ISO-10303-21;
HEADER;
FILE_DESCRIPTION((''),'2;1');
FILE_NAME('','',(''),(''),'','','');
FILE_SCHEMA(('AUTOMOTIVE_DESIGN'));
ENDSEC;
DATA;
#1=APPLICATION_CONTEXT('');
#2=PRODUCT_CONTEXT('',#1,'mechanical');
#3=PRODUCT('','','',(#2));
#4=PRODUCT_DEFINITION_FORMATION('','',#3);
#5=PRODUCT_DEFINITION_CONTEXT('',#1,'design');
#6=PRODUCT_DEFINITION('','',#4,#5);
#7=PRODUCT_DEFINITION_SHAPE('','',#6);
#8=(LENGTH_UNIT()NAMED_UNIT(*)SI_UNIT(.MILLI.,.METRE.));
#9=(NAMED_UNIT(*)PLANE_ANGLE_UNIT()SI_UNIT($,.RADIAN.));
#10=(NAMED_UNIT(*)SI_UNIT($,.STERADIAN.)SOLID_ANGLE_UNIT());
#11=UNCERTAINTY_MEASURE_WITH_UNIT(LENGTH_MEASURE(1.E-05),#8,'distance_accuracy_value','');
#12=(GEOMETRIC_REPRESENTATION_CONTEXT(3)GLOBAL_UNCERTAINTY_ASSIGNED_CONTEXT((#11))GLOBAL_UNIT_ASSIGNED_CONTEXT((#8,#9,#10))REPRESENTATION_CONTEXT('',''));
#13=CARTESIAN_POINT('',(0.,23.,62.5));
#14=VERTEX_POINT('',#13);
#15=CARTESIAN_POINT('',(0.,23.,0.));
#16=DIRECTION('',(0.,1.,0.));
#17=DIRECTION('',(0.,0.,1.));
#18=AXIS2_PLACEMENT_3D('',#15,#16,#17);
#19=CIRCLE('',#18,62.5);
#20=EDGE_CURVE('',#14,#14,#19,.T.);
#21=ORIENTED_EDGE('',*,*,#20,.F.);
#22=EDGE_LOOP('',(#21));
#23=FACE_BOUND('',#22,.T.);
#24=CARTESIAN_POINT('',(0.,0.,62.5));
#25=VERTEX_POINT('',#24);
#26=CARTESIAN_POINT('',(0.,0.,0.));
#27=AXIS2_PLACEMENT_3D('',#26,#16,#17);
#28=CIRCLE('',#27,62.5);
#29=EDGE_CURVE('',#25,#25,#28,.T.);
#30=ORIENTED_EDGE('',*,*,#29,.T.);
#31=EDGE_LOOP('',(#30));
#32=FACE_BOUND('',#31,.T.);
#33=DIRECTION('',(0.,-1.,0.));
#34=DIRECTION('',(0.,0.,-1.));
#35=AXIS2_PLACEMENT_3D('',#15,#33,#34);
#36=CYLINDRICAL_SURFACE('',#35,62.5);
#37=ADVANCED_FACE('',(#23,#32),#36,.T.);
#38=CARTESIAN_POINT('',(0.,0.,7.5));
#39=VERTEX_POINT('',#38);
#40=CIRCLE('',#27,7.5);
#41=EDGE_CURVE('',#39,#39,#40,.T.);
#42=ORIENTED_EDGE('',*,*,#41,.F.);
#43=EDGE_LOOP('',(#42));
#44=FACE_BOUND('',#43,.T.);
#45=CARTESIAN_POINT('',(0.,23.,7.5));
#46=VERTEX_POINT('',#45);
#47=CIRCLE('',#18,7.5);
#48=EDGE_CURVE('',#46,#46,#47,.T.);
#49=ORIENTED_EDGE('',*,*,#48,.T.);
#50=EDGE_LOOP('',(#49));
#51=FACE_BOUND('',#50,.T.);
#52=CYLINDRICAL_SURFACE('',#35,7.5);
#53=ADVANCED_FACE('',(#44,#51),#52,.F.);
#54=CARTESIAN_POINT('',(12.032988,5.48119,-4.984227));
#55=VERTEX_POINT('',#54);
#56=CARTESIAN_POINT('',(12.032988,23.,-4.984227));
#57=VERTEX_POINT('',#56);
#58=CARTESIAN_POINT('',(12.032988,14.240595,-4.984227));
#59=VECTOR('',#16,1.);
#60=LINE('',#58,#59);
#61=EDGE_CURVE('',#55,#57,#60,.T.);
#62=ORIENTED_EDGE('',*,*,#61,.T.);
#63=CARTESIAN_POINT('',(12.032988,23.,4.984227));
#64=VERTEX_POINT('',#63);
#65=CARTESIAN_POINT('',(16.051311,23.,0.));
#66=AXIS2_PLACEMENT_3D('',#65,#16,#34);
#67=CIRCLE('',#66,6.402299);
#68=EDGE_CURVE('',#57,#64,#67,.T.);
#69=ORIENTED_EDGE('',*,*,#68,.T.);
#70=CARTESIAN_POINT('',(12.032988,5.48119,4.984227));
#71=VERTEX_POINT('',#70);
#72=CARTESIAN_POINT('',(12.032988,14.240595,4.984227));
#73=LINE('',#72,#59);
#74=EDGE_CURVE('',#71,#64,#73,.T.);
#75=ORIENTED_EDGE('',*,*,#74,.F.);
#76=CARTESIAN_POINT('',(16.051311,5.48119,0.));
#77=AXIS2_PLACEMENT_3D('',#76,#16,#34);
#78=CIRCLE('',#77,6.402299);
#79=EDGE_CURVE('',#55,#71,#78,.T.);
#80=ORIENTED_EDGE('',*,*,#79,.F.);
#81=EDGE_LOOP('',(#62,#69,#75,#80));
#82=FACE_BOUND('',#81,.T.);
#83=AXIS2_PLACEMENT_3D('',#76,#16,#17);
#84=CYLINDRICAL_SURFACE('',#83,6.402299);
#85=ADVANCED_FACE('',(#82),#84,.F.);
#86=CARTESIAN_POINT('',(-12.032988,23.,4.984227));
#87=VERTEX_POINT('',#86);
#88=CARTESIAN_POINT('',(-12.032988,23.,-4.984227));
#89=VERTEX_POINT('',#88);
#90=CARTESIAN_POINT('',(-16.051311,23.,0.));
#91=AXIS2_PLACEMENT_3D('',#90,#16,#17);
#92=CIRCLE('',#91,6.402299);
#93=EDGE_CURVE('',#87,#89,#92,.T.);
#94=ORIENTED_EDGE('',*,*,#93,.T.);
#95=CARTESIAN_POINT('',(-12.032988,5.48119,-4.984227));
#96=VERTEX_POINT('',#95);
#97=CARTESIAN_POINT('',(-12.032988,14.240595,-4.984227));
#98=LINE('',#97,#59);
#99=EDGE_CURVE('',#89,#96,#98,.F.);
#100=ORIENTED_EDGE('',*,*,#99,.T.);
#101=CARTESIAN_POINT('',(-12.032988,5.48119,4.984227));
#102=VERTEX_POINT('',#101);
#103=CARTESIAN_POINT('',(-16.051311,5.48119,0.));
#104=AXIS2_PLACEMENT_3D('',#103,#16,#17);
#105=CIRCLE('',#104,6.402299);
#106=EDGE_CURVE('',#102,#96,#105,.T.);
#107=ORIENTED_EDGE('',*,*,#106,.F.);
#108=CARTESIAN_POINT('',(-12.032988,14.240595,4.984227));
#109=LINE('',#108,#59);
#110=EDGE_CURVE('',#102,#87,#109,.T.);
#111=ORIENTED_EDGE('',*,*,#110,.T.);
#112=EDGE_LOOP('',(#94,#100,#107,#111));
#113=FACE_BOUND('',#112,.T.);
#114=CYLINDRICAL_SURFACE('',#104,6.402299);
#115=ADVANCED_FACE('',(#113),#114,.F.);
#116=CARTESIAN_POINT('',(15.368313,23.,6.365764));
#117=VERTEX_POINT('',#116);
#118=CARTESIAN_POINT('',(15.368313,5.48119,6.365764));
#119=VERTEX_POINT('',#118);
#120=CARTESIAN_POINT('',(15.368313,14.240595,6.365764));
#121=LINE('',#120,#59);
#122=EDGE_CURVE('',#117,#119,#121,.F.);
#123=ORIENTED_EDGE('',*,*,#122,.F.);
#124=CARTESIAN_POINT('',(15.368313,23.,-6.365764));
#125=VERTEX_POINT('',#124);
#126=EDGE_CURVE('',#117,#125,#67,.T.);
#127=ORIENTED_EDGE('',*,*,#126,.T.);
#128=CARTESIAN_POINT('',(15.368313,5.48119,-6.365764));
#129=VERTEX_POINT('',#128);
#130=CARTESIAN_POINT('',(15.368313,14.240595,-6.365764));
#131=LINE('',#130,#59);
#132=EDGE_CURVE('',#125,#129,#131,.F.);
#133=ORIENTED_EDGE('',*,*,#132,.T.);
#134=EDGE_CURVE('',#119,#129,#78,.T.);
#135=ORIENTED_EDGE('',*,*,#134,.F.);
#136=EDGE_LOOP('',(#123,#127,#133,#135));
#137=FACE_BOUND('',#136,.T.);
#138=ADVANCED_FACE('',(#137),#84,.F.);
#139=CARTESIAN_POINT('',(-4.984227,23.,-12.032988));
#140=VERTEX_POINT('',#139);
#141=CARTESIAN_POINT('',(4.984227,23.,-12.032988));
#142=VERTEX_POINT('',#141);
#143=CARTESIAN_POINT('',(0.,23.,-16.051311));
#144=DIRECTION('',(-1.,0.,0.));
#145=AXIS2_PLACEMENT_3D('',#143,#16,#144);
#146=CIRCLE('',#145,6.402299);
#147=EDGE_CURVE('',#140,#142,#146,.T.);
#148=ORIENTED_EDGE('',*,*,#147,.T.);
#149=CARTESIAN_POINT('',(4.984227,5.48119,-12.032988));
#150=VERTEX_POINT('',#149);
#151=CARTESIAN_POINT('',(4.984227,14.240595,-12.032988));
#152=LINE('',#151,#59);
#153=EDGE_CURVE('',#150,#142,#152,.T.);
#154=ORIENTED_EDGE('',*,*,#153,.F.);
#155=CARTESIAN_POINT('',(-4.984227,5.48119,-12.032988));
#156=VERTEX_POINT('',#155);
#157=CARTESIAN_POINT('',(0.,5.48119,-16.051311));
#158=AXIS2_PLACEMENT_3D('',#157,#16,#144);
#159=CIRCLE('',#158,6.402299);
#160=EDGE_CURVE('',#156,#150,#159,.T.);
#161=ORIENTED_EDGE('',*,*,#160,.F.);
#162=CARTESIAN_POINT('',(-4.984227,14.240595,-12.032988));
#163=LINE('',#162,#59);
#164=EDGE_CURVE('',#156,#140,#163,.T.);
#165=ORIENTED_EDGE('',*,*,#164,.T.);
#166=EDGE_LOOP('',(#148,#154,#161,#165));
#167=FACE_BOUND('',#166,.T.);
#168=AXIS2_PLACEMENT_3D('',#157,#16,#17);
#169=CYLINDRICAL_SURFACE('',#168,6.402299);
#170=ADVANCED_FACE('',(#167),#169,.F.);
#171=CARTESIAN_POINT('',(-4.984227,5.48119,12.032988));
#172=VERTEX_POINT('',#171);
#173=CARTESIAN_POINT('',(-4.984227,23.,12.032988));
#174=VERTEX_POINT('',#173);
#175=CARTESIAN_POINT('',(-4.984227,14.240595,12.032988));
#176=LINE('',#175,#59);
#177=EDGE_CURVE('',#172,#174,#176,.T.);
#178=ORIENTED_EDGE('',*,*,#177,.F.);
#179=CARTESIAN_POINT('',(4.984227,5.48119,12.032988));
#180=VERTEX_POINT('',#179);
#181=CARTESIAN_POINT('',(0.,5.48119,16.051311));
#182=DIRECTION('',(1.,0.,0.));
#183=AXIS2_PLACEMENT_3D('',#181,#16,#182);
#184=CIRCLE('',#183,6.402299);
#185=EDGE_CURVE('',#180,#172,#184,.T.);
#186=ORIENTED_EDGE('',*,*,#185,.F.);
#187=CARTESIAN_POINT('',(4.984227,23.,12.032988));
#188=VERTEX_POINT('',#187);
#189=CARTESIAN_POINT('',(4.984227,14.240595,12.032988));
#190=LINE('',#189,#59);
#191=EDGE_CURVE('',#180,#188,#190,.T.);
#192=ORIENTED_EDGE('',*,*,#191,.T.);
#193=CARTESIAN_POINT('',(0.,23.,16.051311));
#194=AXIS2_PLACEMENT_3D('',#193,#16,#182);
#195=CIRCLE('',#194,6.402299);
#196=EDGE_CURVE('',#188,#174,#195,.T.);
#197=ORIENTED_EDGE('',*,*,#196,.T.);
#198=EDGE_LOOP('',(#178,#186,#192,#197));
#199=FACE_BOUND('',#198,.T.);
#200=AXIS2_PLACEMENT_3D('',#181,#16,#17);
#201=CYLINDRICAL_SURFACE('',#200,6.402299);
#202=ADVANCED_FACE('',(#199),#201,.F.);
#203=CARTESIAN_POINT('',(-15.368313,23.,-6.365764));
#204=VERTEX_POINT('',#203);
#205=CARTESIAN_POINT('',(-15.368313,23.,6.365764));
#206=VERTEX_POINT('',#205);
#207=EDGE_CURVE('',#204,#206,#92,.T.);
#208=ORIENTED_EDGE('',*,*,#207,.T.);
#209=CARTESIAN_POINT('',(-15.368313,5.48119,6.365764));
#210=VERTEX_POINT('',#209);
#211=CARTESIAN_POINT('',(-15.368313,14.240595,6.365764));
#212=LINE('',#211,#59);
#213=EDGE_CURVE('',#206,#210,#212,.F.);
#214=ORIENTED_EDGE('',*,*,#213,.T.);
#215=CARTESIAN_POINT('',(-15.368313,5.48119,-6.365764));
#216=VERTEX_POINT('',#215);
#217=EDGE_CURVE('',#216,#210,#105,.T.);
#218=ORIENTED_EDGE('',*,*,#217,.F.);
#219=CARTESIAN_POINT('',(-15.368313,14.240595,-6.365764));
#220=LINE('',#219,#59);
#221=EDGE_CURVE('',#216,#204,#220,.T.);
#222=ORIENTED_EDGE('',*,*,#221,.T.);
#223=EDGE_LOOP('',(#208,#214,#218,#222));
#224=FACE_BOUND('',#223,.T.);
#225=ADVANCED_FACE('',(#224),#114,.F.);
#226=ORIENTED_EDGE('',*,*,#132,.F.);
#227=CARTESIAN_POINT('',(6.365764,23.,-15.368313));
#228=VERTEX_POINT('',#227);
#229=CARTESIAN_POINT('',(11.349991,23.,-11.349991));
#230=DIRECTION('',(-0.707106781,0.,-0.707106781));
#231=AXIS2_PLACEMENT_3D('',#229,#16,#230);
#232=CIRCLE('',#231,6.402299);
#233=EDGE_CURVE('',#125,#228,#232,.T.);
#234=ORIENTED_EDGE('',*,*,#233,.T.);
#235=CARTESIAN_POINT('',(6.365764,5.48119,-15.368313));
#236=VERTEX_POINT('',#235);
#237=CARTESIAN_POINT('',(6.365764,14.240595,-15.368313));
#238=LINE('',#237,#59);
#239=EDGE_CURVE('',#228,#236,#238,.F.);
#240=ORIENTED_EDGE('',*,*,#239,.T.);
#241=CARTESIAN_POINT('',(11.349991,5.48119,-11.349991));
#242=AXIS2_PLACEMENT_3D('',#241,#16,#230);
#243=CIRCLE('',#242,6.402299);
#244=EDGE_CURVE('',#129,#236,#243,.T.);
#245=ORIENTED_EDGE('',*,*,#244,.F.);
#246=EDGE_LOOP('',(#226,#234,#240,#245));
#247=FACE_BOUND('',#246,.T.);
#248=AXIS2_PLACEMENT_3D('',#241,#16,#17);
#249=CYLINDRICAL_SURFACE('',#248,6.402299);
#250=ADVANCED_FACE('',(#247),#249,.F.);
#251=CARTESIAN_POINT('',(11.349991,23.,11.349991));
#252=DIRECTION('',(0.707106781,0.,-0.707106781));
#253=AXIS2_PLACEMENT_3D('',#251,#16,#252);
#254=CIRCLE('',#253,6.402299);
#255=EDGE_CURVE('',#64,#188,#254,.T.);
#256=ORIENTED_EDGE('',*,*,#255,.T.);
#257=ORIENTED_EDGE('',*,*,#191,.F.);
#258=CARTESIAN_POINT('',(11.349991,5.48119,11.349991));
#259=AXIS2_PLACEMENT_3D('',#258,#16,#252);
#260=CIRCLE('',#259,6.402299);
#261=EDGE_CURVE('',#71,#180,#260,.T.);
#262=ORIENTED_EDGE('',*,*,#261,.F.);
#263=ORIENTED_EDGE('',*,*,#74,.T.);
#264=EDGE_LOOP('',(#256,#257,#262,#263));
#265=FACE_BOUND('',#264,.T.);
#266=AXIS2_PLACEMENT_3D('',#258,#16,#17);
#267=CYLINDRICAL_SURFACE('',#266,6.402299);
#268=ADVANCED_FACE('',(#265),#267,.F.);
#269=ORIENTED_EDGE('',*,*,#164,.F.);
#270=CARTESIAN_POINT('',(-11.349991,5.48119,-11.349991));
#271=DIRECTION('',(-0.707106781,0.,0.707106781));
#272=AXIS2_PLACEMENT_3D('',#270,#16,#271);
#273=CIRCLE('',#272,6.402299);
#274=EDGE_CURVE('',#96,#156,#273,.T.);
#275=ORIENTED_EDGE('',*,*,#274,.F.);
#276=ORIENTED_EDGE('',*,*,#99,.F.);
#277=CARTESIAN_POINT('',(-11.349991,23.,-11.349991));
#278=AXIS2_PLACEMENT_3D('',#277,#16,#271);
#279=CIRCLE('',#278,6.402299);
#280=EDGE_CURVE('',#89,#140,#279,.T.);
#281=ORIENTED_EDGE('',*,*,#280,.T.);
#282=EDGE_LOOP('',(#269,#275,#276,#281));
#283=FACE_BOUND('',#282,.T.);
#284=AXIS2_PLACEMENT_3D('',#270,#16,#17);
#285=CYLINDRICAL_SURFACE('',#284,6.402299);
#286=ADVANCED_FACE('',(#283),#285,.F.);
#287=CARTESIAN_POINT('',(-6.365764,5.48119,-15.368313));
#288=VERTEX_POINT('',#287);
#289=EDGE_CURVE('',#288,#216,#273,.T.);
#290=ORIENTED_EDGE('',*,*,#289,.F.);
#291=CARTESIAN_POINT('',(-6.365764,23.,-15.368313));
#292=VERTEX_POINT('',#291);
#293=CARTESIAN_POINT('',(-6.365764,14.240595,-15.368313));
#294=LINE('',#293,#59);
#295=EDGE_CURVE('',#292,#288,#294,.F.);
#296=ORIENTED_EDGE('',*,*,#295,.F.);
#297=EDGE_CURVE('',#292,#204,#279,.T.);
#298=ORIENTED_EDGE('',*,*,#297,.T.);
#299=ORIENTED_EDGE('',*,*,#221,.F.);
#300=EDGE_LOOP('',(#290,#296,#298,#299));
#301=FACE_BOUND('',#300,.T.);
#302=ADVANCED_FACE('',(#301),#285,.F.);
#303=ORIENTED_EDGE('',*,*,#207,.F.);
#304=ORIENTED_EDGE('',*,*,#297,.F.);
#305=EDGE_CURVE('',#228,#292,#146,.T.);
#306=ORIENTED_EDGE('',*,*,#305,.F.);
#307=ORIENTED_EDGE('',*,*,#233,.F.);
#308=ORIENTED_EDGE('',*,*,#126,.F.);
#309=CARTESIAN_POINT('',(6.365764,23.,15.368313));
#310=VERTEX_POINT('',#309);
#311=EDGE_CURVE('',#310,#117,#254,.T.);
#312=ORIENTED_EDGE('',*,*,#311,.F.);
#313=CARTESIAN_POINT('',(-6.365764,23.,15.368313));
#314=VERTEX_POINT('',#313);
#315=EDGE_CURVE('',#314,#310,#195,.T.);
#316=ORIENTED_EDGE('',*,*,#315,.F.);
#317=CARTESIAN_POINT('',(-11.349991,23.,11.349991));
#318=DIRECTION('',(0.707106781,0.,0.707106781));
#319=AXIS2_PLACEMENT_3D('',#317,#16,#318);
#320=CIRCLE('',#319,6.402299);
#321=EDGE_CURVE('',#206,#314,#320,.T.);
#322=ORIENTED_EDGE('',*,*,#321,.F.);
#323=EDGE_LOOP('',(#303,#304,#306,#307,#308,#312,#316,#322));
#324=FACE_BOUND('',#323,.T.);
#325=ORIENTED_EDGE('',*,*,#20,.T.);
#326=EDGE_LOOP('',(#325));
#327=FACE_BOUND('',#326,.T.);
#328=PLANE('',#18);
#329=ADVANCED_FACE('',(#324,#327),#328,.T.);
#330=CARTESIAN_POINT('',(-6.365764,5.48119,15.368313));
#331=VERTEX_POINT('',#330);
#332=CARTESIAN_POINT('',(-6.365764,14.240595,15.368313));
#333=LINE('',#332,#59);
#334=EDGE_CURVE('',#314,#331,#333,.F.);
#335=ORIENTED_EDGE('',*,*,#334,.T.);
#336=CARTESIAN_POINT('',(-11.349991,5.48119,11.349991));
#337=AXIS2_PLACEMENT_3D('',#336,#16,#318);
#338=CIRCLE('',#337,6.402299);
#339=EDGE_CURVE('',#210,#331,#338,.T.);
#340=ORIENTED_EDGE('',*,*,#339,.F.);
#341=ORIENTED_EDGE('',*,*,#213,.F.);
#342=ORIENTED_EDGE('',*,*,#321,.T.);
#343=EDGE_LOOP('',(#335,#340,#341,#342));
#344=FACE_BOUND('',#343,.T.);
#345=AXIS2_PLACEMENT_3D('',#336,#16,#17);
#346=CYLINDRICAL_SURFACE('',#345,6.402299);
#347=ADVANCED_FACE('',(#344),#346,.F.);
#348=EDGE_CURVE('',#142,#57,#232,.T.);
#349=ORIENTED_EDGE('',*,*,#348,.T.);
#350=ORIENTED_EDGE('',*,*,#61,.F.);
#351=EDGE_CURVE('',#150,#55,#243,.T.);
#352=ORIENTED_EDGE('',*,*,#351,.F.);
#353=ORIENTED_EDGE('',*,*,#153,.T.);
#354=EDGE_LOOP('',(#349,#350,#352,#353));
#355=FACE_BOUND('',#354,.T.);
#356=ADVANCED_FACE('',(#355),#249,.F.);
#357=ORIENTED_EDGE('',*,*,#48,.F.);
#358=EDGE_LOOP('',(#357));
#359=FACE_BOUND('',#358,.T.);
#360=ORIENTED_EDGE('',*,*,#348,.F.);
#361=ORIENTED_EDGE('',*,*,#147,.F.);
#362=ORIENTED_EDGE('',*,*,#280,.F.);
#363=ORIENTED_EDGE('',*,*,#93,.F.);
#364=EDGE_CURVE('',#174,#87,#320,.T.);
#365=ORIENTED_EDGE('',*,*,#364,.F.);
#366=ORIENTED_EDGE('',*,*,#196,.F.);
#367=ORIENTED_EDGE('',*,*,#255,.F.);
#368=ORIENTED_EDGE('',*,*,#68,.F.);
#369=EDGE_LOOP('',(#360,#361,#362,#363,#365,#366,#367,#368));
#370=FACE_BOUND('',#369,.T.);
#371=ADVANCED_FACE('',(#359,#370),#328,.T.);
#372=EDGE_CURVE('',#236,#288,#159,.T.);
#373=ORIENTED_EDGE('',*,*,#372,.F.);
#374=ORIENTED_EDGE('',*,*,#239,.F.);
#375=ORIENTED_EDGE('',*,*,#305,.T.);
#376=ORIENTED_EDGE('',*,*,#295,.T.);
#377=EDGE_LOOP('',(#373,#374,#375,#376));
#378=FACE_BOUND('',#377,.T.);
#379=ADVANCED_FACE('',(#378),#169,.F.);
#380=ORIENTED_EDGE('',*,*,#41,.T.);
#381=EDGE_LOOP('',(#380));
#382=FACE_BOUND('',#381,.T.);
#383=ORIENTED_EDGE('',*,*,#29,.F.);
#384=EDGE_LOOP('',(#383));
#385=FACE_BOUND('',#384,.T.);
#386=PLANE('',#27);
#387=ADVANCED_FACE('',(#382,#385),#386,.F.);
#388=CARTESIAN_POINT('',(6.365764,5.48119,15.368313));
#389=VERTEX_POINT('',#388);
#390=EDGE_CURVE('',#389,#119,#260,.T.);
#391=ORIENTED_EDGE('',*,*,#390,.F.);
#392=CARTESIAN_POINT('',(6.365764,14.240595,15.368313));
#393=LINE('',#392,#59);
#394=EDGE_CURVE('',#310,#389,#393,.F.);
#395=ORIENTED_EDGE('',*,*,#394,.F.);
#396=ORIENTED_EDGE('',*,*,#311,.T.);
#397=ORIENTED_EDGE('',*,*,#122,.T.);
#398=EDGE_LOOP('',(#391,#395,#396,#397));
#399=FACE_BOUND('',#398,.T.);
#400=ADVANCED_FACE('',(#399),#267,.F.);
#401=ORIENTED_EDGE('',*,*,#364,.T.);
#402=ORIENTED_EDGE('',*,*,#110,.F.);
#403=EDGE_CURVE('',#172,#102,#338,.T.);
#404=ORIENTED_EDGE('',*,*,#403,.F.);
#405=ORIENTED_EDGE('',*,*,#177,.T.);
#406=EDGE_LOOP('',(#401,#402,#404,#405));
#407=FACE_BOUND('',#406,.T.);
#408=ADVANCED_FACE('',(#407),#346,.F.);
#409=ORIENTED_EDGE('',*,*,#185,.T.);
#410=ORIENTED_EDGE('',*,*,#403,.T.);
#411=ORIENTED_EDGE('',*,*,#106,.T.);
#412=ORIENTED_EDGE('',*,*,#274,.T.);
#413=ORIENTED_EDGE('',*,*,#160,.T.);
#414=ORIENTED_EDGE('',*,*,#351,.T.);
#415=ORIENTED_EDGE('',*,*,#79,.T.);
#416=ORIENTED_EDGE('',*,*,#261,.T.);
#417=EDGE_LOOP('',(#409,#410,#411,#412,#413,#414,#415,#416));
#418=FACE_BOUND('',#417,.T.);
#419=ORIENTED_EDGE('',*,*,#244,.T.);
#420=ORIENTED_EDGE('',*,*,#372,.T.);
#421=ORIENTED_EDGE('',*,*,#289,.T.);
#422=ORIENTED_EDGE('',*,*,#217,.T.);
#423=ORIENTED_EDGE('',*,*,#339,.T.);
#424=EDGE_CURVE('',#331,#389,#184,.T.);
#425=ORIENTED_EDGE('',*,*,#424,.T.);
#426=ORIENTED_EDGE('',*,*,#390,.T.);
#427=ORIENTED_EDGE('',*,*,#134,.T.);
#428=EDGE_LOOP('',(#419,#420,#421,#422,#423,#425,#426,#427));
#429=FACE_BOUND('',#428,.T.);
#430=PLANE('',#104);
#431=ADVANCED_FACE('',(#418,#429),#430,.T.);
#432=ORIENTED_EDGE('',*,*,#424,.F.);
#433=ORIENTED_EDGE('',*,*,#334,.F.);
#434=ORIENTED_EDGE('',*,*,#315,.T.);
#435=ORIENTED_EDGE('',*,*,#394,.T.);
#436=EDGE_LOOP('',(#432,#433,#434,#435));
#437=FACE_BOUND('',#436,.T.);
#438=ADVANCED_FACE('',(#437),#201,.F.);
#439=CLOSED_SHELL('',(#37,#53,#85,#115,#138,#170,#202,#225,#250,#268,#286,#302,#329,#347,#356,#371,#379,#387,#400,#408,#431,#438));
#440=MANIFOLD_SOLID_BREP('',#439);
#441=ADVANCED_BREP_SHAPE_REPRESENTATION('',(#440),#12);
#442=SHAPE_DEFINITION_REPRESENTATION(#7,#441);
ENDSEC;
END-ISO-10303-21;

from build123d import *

# Parameters (mm, degrees)
SKETCH1_R           = 62.5
BOSS_EXTRUDE1_DEPTH = 23
SKETCH2_R           = 7.5
CUT_EXTRUDE1_DEPTH  = 92.331812639
SKETCH3_R           = 6.402299088
CUT_EXTRUDE2_DEPTH  = 17.518809877
CIRPATTERN1_COUNT   = 8


with BuildPart() as part:
    # Sketch1 → Boss-Extrude1 (new body)
    with BuildSketch(Plane(origin=(0, 0, 0), x_dir=(1, 0, 0), z_dir=(0, 1, 0))):
        Circle(SKETCH1_R)
    extrude(amount=BOSS_EXTRUDE1_DEPTH)

    # Sketch2 → Cut-Extrude1 (cut, through all)
    with BuildSketch(Plane(origin=(0, 0, 0), x_dir=(1, 0, 0), z_dir=(0, 1, 0))):
        Circle(SKETCH2_R)
    extrude(amount=CUT_EXTRUDE1_DEPTH, mode=Mode.SUBTRACT)

    # Sketch3 → Cut-Extrude2 (cut)
    with BuildSketch(Plane(origin=(0, 23, 0), x_dir=(1, 0, 0), z_dir=(0, 1, 0))):
        with Locations((-16.05131074, 0)):
            Circle(SKETCH3_R)
    cut_extrude2 = extrude(amount=-CUT_EXTRUDE2_DEPTH, mode=Mode.SUBTRACT)

    # CirPattern1: Cut-Extrude2 ×8 about axis
    cirpattern1_axis = Axis((0, 0, 0), (0, 1, 0))
    for i in range(1, CIRPATTERN1_COUNT):
        add(cut_extrude2.rotate(cirpattern1_axis, i * 360 / CIRPATTERN1_COUNT), mode=Mode.SUBTRACT)


solid = part.part
